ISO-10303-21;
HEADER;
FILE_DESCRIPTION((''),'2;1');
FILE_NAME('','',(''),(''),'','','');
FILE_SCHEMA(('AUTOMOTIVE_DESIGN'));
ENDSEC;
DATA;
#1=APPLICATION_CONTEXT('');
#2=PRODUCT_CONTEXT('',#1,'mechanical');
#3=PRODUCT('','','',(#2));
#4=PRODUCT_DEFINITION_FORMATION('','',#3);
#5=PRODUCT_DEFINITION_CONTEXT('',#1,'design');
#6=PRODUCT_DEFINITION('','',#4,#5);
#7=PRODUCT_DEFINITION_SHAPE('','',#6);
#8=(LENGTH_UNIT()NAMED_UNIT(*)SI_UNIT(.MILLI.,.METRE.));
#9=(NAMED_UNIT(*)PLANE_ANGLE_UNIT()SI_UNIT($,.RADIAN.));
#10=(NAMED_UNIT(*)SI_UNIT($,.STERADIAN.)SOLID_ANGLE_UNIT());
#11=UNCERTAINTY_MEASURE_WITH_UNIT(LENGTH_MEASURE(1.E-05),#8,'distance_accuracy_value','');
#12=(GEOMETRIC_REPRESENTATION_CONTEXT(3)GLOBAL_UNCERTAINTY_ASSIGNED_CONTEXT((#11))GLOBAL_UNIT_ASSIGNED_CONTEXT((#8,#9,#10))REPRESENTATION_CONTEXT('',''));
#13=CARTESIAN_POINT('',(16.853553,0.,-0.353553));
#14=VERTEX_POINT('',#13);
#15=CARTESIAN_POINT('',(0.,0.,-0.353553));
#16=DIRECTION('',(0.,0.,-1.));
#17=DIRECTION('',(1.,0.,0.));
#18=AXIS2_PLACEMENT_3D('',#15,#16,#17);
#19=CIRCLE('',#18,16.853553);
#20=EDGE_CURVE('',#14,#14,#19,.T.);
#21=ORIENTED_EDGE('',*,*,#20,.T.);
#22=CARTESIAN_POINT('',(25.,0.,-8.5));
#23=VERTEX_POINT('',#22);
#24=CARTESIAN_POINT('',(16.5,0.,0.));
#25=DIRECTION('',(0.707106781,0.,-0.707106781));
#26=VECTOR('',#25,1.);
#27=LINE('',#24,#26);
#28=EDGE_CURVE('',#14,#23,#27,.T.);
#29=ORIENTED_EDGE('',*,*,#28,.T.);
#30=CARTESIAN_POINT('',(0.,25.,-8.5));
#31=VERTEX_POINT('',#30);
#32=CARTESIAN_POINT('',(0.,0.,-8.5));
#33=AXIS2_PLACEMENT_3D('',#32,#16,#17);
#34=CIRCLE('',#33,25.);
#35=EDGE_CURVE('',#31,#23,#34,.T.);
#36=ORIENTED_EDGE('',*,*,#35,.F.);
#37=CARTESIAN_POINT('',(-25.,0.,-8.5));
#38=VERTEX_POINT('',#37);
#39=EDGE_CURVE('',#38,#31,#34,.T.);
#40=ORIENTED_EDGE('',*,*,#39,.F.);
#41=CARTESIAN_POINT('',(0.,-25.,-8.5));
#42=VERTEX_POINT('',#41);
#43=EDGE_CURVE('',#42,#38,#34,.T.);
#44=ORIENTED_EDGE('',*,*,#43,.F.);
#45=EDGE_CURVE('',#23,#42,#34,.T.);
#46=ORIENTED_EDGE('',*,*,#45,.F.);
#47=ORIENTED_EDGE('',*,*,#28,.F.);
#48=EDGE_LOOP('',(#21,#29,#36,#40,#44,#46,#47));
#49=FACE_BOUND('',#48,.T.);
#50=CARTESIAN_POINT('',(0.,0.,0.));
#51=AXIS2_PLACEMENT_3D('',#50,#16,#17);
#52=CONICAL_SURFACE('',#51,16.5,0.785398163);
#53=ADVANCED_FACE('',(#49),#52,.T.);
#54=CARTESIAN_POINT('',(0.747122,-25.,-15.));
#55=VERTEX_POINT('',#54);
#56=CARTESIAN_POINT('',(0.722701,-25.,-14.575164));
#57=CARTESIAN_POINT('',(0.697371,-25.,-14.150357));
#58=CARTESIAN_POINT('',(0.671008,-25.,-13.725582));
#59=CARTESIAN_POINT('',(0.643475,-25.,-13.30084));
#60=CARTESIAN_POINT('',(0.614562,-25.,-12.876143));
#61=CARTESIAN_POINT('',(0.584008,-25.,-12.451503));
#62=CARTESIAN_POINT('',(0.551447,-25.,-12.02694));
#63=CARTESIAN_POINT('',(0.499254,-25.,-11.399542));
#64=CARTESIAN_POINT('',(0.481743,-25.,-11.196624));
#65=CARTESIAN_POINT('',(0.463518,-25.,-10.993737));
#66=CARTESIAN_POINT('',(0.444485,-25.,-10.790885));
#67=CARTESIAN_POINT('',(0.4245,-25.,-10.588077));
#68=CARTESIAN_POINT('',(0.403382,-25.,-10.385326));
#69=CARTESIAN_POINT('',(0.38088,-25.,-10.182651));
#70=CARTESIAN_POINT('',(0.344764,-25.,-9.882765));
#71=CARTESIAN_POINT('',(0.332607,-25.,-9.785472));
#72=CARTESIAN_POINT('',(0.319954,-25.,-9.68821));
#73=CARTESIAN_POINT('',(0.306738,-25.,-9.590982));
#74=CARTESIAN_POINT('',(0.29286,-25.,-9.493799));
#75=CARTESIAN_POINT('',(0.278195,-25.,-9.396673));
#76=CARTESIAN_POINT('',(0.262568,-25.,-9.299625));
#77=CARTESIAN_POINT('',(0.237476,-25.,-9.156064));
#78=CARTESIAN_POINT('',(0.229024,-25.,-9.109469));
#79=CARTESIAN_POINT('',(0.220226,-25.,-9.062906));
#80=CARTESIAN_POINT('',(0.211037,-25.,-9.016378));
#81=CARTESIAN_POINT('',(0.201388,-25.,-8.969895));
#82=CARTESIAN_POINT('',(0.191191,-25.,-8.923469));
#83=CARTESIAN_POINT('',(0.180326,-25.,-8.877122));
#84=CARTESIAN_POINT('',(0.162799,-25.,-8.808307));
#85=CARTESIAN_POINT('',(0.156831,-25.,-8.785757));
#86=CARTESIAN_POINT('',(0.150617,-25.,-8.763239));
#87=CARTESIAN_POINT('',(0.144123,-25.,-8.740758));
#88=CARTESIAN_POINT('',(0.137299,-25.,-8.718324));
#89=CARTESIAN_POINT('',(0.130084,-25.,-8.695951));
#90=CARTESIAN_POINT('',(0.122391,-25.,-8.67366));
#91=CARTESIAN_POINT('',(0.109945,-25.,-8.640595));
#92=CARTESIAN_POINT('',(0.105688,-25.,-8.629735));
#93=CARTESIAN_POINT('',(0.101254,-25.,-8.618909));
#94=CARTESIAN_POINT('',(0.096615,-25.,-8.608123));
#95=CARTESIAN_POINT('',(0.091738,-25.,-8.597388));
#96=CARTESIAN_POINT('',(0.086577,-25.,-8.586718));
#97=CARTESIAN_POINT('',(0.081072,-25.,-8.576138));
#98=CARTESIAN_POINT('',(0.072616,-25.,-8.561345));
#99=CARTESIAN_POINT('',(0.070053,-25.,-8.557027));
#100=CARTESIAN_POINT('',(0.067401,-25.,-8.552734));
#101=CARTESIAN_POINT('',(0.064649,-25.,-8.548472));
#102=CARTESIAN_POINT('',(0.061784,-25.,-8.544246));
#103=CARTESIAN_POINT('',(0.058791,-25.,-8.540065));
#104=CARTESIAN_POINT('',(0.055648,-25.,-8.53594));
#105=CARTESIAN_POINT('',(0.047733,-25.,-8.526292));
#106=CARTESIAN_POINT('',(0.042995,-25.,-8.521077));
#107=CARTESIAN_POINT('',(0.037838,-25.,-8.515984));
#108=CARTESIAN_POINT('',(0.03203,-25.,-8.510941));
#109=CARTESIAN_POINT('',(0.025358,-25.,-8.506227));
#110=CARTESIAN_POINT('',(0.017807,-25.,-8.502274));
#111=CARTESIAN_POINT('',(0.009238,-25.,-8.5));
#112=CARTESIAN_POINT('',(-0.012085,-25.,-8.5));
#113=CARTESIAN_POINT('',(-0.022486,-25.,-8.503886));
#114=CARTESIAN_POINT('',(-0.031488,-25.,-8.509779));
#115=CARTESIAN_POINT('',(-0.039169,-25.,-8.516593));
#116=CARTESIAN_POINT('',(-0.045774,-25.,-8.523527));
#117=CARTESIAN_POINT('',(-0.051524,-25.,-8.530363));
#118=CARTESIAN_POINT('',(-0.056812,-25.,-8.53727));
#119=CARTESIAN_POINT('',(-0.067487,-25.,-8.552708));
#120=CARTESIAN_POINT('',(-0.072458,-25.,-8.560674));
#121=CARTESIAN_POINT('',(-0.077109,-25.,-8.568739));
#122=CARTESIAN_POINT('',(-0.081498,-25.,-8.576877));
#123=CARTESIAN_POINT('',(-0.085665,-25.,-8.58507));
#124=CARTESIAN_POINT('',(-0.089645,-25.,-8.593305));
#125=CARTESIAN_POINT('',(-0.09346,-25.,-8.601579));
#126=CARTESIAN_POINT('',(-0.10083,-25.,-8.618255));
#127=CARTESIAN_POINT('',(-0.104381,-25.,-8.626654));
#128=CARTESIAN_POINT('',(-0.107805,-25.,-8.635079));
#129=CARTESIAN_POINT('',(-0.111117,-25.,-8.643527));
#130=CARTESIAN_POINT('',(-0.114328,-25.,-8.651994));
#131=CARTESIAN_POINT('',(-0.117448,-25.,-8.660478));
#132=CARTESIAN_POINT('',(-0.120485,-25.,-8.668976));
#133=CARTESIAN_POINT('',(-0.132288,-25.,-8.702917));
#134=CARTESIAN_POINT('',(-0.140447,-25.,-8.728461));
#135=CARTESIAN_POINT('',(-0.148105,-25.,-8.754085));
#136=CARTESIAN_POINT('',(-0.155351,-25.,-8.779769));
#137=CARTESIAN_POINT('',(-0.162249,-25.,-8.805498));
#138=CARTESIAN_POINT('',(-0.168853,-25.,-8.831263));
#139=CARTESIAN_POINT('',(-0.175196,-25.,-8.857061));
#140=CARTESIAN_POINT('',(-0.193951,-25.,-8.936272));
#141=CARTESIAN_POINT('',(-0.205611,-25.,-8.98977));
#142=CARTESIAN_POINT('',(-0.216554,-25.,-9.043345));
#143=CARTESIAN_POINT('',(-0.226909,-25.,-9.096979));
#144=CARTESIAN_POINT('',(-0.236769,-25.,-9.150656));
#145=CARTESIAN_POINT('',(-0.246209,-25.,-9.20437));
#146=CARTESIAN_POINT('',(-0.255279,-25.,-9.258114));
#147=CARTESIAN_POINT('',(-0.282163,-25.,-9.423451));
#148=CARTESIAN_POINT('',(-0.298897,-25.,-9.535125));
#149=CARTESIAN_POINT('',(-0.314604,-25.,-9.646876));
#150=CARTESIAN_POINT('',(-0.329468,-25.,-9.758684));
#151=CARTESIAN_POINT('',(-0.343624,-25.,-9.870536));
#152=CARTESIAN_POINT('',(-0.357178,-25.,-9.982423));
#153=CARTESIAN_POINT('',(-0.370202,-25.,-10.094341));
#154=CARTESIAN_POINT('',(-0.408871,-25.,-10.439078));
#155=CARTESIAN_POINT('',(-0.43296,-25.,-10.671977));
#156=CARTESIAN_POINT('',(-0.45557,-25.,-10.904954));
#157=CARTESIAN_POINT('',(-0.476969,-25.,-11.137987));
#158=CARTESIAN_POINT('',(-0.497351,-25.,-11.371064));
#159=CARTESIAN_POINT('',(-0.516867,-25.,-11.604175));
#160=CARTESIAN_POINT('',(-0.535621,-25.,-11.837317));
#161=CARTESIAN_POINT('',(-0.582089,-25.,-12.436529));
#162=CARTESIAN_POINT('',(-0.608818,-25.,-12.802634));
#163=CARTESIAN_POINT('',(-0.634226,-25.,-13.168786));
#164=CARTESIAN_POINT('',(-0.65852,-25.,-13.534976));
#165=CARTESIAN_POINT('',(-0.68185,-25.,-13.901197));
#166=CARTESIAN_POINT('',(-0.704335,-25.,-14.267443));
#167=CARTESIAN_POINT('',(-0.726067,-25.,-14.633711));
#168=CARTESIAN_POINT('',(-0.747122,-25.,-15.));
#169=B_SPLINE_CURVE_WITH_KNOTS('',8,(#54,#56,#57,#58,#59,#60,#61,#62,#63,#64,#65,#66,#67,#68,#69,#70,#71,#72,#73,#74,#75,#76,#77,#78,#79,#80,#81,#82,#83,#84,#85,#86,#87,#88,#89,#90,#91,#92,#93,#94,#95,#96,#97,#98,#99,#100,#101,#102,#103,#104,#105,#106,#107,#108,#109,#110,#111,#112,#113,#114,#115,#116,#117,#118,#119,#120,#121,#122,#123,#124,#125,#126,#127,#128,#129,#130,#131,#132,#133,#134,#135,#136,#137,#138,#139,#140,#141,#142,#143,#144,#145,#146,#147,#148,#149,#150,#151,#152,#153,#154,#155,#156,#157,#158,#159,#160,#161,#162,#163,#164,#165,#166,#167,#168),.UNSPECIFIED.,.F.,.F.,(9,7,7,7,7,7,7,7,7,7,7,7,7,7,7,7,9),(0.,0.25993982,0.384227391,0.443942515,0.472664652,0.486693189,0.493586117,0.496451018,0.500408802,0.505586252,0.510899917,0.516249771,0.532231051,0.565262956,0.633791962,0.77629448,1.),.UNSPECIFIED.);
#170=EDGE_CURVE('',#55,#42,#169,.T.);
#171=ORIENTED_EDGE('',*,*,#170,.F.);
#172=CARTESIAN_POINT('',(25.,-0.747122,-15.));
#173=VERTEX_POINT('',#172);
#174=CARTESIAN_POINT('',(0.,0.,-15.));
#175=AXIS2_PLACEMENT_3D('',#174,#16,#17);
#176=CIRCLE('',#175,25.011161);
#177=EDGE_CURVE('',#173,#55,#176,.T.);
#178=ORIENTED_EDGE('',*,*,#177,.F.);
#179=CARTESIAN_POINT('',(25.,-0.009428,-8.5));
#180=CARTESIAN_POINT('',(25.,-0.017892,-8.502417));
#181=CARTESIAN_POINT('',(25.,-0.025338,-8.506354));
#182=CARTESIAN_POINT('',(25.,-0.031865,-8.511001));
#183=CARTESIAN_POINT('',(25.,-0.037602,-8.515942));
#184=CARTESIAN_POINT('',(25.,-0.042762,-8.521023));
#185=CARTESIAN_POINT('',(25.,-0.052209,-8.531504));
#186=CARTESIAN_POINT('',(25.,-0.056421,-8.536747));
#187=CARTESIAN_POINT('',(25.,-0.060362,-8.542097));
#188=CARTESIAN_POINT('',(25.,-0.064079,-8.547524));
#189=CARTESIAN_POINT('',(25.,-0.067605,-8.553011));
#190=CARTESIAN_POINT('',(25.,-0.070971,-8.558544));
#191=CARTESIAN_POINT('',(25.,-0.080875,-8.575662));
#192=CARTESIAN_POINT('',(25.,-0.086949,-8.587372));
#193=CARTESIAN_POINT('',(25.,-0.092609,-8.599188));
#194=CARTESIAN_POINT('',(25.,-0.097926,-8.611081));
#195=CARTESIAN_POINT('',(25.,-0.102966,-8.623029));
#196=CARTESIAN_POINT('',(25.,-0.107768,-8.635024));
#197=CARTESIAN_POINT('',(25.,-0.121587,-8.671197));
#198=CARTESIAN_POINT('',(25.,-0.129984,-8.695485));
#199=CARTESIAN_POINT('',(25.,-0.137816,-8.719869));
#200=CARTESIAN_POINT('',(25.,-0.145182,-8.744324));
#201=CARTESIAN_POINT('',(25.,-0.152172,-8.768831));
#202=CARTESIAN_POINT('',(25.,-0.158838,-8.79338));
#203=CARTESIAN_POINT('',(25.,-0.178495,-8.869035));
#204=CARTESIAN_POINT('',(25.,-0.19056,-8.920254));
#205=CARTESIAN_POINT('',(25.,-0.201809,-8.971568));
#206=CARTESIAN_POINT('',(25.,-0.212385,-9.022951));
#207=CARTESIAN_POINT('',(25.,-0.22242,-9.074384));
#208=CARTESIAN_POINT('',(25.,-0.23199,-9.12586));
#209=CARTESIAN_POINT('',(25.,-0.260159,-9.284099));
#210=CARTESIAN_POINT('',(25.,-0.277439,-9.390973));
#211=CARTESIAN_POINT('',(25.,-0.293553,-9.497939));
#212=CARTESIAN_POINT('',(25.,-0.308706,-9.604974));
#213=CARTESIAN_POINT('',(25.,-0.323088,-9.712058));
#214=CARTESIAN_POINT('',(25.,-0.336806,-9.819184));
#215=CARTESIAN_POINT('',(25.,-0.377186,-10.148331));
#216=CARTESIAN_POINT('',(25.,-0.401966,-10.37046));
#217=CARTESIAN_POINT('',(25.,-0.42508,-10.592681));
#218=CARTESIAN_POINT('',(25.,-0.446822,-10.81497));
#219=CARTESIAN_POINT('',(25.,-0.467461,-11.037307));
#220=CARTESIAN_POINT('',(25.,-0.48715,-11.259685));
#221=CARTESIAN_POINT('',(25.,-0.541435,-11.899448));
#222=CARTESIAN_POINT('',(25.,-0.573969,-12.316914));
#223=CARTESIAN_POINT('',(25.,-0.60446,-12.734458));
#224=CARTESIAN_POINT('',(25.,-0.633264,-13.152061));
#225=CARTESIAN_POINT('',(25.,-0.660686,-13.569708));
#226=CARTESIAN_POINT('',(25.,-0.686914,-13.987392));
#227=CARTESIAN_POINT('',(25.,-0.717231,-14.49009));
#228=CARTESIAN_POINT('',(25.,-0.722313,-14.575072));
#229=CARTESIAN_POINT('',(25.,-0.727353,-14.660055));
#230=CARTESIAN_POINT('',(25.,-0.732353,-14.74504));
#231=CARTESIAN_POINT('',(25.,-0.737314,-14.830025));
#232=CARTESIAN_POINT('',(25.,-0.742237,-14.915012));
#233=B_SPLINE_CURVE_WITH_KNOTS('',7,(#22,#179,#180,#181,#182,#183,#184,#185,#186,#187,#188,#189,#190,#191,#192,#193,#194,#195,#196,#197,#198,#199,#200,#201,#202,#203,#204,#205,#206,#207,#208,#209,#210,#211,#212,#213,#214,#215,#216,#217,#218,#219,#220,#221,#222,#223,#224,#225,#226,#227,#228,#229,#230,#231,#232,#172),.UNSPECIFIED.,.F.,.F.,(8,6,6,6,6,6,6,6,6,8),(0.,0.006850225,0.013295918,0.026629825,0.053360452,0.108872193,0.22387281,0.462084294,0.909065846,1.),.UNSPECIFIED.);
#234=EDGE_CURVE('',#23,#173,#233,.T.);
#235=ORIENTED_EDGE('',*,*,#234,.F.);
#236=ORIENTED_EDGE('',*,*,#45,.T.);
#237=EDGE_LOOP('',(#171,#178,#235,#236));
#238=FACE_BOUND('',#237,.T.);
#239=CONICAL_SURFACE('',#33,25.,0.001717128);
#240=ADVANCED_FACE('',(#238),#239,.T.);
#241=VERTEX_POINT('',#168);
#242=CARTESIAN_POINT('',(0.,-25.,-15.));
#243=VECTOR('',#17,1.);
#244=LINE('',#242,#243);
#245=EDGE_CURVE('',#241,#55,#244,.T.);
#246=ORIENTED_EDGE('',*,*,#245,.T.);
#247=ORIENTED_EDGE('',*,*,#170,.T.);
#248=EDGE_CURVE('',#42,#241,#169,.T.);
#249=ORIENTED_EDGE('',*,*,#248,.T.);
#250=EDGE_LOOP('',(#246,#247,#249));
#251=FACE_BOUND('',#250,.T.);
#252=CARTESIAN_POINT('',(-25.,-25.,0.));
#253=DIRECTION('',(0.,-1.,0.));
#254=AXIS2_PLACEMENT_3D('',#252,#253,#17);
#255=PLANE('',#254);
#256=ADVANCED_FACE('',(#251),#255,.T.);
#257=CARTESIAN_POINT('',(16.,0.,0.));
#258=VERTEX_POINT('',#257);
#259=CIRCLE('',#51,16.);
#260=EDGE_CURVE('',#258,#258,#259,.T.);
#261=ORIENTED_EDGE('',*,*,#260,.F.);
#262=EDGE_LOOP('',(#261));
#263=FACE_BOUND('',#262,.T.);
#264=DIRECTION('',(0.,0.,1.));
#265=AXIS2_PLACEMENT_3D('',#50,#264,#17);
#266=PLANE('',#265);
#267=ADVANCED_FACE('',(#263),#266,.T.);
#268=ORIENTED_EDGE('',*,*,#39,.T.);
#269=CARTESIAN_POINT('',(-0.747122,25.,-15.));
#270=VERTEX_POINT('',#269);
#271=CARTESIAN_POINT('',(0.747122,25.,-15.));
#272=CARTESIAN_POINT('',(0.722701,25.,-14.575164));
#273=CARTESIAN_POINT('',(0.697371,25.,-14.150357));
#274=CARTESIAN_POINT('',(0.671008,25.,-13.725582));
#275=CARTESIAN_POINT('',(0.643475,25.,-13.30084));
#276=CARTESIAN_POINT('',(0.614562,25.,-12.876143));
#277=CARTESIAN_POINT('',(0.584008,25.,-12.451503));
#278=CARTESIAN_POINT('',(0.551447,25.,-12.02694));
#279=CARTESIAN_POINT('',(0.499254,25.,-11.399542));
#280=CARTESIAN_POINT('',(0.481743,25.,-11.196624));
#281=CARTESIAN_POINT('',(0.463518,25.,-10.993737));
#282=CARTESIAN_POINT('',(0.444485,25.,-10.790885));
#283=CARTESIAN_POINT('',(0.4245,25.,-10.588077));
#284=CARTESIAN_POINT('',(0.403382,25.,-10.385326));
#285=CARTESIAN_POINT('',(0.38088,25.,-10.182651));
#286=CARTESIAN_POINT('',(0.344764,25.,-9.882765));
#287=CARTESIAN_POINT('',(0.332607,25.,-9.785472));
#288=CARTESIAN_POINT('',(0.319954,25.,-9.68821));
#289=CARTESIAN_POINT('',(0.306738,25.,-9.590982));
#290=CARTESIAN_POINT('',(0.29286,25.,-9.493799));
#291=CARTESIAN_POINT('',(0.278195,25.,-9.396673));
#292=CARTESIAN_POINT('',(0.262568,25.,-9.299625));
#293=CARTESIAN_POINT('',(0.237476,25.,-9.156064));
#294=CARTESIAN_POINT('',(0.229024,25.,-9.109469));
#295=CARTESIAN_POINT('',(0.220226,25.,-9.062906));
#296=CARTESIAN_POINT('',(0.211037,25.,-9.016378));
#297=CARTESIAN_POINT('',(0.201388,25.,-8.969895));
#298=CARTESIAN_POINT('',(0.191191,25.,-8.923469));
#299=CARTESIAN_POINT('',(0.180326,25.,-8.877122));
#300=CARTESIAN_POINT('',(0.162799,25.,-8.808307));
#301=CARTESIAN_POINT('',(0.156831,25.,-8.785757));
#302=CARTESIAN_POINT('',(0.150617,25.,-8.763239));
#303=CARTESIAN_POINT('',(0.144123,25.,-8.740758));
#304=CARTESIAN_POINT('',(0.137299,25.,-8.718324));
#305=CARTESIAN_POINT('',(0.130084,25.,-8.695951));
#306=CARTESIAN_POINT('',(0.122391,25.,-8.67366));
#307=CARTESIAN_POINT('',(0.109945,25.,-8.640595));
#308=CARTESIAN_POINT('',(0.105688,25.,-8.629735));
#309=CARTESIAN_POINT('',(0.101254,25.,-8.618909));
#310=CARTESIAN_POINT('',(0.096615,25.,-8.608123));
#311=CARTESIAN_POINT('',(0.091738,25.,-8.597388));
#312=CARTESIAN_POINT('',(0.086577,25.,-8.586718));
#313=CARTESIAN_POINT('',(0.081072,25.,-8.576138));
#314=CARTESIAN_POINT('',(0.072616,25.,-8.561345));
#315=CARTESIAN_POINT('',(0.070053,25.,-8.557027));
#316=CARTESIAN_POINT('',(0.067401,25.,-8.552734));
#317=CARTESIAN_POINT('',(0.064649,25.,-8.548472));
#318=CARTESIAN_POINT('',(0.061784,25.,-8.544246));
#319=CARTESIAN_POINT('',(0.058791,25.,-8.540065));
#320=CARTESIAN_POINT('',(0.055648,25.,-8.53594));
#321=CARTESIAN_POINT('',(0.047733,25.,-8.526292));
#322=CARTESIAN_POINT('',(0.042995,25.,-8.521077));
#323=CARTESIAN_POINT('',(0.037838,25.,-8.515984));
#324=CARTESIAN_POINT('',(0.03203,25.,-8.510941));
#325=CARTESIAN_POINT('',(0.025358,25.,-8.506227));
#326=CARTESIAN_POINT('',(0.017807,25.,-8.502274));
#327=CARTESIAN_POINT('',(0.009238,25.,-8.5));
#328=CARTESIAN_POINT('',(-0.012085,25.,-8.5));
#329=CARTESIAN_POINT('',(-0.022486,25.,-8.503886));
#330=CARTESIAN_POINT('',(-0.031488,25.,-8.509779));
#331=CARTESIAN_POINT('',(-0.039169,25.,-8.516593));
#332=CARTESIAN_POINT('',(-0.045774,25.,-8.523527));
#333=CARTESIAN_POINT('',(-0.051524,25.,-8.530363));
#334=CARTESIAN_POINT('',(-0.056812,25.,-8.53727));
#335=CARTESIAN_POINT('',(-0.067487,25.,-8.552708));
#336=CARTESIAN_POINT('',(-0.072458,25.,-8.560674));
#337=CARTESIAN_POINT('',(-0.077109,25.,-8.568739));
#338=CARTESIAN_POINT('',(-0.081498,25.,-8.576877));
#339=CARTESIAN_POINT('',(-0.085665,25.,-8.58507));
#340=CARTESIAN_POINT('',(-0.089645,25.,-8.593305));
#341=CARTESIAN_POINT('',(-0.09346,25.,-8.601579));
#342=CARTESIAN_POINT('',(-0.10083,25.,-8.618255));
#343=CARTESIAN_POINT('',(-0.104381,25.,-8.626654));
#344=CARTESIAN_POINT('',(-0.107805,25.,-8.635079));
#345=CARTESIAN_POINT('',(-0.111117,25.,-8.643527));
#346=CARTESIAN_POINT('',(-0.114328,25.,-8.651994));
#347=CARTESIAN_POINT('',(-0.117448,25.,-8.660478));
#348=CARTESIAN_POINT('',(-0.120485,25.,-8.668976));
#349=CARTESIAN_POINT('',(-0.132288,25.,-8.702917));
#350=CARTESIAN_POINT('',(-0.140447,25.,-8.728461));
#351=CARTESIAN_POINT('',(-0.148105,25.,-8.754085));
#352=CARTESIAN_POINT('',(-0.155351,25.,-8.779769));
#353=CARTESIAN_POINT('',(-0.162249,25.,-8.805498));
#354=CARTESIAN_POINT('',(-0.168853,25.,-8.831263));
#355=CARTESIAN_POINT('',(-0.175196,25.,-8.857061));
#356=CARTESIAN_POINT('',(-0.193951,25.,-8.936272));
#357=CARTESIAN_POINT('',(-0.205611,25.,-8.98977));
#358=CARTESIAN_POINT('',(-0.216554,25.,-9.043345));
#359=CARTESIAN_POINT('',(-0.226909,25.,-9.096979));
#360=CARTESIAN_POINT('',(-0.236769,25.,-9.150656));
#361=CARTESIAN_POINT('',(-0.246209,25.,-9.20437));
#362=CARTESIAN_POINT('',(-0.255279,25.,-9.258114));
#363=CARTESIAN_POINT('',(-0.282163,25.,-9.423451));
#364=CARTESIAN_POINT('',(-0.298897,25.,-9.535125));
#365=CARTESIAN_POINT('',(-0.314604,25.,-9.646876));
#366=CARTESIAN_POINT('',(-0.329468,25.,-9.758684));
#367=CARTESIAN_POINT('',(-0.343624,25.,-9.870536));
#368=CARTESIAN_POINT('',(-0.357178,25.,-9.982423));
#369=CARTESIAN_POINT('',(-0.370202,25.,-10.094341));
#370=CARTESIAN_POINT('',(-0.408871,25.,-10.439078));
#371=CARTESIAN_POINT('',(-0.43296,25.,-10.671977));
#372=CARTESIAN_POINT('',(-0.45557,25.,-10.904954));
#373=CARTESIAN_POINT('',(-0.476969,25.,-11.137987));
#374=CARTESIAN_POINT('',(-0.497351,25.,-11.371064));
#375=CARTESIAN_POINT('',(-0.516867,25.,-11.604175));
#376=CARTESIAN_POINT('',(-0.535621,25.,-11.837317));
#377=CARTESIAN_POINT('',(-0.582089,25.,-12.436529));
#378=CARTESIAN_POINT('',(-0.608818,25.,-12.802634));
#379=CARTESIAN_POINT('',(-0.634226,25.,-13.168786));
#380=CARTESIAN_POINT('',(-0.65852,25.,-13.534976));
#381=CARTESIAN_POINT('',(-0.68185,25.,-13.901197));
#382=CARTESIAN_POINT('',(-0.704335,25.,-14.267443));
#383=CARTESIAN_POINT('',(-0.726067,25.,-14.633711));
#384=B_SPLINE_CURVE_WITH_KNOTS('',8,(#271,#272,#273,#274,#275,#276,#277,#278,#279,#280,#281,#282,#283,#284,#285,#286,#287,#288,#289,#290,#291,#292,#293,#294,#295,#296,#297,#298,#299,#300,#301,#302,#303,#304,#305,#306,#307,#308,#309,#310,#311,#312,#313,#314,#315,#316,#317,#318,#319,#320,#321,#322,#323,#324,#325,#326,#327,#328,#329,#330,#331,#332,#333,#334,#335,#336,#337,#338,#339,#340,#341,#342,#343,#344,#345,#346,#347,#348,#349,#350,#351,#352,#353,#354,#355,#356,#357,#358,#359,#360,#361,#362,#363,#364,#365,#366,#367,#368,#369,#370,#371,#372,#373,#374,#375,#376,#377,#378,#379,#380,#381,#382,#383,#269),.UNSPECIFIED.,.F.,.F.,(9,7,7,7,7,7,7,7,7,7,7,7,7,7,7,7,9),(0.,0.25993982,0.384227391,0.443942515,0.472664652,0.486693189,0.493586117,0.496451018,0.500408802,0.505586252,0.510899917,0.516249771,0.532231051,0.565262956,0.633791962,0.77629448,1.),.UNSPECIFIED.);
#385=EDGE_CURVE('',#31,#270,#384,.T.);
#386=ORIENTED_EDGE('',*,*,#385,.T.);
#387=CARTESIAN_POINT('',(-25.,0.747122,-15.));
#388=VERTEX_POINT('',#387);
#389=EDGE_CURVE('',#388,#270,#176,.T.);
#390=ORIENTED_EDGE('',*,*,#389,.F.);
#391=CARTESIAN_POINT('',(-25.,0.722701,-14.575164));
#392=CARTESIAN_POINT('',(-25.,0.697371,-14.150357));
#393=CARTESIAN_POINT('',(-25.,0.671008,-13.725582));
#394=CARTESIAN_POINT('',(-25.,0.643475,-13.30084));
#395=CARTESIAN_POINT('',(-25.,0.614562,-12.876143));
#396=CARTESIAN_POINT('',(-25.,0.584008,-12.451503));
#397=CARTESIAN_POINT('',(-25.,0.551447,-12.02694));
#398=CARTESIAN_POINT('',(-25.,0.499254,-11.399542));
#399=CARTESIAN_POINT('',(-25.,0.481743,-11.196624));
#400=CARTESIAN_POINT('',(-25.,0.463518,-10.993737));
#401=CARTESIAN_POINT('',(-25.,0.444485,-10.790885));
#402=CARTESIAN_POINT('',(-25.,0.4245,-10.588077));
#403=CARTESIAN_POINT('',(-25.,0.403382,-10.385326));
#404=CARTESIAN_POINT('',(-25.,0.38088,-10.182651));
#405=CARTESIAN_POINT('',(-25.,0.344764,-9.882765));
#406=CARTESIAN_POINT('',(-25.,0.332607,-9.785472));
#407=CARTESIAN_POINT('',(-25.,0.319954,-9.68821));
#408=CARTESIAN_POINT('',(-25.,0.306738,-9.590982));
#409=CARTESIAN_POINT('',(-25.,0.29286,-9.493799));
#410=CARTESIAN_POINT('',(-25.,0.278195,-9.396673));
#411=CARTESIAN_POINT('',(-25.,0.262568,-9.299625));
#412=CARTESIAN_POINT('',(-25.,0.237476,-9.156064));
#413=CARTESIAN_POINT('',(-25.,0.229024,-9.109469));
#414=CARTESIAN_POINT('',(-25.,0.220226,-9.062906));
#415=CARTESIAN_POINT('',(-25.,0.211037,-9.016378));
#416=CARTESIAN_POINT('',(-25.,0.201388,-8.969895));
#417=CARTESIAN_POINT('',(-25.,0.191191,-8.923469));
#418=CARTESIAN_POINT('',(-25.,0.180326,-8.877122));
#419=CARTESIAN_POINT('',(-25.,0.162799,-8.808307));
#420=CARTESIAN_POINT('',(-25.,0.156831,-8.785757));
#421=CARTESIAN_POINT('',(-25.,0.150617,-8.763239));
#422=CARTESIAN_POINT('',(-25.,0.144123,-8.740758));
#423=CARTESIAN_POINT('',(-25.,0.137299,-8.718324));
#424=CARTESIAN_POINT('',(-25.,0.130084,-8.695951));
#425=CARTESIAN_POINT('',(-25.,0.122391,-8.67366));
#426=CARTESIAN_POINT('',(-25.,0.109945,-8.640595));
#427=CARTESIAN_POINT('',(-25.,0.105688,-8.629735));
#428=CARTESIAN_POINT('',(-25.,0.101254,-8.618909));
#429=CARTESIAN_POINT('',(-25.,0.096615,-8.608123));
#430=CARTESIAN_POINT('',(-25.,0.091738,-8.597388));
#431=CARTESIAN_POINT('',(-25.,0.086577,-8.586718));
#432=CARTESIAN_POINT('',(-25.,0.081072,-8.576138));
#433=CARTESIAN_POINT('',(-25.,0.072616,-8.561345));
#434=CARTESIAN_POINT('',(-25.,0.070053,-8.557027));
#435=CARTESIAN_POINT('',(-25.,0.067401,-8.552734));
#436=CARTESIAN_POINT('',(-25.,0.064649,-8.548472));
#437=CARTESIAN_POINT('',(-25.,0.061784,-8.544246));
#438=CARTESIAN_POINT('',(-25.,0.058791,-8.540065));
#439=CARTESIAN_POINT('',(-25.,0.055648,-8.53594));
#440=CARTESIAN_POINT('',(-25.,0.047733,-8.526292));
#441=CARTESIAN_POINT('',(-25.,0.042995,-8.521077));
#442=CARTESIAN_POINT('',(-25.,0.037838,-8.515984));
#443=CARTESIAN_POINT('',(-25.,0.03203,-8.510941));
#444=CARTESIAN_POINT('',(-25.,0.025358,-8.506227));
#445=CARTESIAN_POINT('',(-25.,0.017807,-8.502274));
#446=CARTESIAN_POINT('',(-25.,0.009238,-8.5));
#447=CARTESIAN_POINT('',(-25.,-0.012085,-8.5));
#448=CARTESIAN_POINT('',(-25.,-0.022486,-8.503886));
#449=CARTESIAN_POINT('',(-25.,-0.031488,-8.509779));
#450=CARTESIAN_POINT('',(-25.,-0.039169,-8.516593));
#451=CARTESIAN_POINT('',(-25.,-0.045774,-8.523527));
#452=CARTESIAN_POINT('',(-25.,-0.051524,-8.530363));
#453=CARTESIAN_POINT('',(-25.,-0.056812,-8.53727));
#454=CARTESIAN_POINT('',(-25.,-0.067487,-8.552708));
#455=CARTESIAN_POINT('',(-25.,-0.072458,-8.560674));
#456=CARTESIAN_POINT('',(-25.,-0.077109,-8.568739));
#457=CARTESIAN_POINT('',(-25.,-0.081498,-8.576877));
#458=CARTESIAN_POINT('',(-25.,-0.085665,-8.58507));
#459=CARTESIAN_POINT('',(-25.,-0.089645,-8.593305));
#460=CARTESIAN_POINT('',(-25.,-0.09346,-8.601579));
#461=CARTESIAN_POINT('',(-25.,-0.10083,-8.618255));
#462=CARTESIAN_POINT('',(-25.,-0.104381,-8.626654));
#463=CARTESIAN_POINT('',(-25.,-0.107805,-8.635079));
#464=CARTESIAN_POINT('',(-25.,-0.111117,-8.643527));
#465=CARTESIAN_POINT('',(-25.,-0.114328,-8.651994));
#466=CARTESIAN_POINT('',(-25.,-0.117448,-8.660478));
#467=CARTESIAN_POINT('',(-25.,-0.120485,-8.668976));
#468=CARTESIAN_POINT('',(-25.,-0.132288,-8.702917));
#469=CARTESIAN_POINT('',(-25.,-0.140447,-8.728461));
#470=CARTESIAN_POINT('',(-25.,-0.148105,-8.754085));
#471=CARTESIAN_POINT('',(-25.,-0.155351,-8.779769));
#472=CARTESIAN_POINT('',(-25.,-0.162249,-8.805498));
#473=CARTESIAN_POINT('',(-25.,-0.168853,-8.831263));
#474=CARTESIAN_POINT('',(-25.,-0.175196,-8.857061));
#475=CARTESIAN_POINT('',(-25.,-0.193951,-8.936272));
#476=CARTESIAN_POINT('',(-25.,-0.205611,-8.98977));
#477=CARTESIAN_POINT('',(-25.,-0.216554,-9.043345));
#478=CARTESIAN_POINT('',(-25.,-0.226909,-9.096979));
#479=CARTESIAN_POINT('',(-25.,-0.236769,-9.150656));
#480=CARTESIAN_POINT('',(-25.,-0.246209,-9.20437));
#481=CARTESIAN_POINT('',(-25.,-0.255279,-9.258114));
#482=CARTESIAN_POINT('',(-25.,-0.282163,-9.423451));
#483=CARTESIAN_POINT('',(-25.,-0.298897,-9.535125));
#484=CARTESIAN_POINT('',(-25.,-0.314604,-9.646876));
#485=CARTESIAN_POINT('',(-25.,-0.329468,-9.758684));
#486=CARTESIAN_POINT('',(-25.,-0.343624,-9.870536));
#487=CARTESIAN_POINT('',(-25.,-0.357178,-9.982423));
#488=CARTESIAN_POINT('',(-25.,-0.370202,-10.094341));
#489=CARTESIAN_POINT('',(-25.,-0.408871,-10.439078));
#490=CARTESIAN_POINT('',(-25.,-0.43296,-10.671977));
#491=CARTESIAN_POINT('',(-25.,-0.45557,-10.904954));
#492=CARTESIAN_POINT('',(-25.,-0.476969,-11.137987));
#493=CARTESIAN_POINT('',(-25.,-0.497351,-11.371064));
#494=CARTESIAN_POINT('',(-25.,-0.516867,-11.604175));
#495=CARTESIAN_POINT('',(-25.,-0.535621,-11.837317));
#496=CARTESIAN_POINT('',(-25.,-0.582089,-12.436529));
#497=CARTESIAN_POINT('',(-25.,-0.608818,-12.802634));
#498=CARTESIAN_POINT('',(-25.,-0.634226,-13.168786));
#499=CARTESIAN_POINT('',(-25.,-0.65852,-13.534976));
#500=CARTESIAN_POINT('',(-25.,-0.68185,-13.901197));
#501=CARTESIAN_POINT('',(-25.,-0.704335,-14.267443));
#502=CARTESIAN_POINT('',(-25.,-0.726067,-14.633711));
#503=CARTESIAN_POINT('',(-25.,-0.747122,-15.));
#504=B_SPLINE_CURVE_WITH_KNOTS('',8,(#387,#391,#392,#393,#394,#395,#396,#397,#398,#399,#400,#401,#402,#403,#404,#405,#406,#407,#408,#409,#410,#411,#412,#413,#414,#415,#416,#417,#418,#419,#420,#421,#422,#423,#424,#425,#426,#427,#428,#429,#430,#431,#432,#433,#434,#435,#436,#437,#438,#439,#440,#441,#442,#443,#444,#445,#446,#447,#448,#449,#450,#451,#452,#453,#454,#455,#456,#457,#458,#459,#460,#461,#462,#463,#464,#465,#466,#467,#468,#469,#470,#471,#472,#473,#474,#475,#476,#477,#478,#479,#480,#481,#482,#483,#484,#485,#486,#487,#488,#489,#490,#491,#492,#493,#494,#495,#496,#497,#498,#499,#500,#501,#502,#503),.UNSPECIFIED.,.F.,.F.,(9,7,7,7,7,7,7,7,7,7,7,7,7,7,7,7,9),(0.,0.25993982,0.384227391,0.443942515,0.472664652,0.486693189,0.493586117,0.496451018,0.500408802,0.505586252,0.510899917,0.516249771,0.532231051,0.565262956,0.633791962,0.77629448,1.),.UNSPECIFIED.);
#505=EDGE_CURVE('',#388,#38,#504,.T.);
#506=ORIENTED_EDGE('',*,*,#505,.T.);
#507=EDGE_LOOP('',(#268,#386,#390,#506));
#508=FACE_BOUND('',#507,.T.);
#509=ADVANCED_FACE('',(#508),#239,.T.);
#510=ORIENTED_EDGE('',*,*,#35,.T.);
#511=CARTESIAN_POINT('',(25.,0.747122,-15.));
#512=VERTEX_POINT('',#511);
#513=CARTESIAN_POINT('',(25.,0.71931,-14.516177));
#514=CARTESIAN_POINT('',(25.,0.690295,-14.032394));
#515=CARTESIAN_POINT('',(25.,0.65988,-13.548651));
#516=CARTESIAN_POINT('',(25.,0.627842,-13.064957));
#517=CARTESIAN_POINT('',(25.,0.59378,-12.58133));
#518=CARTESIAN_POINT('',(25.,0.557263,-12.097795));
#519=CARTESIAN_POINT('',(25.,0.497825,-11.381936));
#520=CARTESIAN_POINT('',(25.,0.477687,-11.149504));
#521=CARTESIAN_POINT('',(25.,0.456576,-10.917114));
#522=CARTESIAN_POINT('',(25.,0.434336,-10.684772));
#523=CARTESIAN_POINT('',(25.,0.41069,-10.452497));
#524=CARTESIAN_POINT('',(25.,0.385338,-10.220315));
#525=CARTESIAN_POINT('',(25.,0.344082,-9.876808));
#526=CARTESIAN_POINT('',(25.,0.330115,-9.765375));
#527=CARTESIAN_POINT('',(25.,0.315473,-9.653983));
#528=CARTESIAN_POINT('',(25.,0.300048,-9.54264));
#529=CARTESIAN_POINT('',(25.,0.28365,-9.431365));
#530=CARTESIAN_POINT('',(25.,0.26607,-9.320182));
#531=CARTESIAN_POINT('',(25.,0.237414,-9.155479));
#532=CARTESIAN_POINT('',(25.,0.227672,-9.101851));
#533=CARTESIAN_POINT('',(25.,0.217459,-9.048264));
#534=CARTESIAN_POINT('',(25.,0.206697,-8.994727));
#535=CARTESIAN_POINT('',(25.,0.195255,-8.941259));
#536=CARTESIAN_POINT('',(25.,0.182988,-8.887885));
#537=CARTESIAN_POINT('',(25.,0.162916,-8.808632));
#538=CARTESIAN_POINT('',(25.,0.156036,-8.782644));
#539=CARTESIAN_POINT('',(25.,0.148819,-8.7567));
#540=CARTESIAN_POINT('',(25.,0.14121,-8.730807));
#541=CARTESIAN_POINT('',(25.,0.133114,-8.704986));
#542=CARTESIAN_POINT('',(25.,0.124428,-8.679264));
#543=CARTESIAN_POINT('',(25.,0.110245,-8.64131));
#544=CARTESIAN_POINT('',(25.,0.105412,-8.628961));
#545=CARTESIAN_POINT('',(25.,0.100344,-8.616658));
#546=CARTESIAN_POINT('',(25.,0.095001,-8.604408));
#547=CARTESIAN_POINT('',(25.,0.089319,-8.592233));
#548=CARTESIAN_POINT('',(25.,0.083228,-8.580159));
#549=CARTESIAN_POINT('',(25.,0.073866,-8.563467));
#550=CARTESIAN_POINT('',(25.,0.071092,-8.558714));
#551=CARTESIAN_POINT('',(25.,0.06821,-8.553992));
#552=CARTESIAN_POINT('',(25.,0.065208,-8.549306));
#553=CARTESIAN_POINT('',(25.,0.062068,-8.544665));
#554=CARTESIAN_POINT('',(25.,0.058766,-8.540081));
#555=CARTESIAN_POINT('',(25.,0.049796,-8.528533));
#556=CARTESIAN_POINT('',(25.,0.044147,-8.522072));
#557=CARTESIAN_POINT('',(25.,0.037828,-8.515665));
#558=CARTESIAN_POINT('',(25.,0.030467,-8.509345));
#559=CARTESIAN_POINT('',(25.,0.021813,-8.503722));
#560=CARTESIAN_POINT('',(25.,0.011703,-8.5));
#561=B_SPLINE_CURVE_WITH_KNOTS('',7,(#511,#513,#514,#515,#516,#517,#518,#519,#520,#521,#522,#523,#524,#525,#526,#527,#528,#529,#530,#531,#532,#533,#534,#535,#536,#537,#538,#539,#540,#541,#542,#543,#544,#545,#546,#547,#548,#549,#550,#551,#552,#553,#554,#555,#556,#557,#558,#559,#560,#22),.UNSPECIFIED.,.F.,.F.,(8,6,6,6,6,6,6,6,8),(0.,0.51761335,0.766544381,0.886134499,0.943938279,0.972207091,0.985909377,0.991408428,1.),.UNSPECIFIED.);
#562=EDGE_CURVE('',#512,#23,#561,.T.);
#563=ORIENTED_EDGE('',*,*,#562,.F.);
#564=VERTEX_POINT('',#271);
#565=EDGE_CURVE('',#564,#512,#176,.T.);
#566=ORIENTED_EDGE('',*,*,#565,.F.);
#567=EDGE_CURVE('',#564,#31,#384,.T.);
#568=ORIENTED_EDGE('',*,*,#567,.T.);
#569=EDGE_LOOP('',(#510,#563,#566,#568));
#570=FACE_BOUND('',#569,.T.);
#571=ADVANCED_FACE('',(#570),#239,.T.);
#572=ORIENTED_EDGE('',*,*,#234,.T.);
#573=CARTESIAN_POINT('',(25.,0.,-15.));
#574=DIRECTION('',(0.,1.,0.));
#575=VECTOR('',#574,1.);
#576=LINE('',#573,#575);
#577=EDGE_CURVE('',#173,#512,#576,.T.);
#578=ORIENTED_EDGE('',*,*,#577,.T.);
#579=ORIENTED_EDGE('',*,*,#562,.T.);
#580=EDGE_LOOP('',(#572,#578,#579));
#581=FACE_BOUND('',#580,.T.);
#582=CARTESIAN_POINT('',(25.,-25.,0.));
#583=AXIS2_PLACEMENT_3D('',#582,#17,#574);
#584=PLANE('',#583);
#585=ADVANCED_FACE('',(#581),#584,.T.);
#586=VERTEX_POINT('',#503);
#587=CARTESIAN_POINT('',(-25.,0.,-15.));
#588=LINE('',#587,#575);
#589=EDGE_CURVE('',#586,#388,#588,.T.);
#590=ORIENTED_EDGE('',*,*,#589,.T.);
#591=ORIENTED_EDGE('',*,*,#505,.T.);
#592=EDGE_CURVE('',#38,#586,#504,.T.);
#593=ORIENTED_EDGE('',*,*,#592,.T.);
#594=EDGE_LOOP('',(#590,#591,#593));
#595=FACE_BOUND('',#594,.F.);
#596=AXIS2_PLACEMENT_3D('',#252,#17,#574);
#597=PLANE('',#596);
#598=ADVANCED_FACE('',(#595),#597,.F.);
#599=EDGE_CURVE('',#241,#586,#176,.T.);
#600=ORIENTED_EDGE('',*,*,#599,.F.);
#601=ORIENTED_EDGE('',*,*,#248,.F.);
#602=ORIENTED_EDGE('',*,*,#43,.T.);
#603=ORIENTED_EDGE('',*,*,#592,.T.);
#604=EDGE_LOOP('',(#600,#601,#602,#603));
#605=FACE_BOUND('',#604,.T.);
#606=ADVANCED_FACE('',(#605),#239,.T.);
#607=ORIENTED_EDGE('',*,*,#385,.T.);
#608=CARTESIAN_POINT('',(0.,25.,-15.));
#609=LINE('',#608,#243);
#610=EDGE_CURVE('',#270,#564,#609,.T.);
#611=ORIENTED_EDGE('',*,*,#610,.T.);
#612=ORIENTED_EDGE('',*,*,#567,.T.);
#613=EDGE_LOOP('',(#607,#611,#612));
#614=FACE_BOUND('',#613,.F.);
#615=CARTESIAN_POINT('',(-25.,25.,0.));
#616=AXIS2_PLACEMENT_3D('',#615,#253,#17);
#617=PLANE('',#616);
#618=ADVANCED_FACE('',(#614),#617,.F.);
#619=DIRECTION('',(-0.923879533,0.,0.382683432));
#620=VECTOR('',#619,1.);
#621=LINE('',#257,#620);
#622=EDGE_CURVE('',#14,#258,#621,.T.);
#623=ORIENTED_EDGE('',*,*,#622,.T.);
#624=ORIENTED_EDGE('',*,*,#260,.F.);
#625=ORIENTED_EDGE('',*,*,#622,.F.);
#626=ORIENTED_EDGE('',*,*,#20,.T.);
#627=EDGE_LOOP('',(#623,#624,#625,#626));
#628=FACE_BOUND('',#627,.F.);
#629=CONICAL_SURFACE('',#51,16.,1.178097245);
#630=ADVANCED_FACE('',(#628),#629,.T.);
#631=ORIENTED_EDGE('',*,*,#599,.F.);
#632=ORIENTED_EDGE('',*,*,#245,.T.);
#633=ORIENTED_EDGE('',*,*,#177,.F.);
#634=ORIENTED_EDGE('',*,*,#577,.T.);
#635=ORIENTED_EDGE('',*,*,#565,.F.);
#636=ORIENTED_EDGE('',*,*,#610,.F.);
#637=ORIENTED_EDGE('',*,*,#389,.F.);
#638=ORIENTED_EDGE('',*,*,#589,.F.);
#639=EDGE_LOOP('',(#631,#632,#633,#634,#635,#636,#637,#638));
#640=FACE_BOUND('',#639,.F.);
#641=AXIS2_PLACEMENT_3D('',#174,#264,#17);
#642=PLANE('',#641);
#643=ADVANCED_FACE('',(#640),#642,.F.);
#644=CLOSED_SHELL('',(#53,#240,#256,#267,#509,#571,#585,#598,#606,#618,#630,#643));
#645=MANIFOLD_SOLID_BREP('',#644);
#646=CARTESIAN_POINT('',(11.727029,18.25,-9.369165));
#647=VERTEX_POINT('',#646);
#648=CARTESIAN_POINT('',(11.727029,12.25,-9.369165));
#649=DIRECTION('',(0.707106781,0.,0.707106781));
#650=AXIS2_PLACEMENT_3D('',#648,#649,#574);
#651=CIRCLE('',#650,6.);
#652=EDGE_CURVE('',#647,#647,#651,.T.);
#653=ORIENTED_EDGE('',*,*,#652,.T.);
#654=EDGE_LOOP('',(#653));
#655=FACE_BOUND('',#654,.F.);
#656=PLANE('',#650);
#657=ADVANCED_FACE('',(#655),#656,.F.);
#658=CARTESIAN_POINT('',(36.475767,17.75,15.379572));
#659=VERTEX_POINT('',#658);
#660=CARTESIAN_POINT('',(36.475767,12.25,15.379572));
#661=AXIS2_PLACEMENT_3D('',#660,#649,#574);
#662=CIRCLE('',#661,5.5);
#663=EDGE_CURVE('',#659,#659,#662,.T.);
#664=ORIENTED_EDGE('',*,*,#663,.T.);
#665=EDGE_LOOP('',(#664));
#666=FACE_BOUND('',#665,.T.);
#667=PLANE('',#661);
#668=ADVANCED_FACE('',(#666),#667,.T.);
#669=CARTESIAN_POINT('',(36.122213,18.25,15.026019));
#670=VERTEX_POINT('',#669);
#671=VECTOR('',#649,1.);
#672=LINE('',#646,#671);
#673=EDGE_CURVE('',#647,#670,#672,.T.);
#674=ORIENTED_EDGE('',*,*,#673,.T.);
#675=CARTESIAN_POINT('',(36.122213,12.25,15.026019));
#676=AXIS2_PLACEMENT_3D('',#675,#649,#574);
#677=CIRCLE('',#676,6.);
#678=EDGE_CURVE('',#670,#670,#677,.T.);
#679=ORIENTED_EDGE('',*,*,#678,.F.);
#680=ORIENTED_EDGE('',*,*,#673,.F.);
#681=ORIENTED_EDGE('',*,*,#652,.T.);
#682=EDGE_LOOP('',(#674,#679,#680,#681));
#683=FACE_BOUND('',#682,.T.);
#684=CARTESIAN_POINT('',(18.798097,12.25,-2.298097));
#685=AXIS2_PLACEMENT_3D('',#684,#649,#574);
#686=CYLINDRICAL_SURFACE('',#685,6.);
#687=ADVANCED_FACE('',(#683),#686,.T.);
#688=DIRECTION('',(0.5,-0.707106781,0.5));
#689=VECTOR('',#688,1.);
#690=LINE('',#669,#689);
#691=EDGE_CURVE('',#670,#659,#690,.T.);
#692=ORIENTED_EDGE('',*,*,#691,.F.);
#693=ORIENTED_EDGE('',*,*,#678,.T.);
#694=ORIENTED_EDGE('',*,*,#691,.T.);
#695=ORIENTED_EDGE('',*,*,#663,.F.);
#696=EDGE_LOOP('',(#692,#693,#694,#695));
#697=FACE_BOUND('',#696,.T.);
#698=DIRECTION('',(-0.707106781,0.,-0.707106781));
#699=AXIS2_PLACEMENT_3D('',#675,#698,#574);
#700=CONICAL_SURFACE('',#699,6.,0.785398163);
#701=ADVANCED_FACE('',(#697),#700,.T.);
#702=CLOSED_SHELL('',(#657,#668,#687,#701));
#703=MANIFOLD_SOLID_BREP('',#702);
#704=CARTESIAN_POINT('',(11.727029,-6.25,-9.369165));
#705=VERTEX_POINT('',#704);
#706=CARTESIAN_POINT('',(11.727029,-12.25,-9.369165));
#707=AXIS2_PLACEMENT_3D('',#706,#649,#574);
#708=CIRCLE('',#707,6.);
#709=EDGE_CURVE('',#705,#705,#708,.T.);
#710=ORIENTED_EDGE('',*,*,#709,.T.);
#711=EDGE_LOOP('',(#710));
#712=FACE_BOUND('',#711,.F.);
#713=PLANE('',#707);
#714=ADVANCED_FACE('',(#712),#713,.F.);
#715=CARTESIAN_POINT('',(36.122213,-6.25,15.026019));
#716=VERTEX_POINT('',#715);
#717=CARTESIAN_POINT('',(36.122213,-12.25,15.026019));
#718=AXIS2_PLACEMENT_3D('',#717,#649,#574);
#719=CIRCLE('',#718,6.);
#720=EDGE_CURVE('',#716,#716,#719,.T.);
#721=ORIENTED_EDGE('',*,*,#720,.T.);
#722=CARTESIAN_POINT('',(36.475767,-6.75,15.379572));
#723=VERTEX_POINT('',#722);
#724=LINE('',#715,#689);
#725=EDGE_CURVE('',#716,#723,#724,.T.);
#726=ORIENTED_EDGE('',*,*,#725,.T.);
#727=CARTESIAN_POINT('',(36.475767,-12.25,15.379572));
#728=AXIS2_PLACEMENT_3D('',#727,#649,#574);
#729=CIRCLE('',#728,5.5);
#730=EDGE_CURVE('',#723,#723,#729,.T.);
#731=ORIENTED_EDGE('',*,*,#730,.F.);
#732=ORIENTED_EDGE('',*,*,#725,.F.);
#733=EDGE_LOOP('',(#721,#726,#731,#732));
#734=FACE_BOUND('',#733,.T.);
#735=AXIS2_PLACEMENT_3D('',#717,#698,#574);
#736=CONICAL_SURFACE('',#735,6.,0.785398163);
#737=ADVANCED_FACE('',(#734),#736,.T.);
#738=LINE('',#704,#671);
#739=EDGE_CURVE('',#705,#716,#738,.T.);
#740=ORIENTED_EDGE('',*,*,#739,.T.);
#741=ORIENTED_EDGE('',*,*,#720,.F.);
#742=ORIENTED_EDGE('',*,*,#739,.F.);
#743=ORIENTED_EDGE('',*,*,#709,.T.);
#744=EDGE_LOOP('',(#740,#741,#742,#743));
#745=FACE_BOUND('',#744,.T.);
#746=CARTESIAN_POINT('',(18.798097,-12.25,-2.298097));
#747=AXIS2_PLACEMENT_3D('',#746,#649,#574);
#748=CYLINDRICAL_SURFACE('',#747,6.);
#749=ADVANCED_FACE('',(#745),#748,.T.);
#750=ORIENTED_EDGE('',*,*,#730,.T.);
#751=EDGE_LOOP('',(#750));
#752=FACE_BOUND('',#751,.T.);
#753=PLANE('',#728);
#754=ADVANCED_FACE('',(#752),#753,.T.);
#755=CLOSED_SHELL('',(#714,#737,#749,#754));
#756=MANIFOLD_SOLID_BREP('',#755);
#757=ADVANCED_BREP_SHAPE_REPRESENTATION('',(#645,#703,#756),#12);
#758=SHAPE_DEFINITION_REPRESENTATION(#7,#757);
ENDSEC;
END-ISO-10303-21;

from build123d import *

# Parameters (mm, degrees)
F0_W          = 50
F0_H          = 50
F1_DEPTH      = 15
F2_SIZE       = 8.5
F3_R          = 6
F6_DEPTH      = 25
F6_DEPTH_BACK = 10
F7_SIZE       = 0.5
F7_2_SIZE     = 0.5
F7_3_SIZE     = 0.5


# Not quite as in the source:
# - a feature names something its author has since deleted; it is built from what else it names


with BuildPart() as f1:
    # F0 (on Top) → F1 (new body)
    with BuildSketch(Plane.XY):
        Rectangle(F0_W, F0_H)
    extrude(amount=-F1_DEPTH)

    # F2
    f2_edges = [f1.edges().sort_by_distance(p)[0] for p in [
        (25, 0, 0),
    ]]
    chamfer(f2_edges, length=F2_SIZE)

    # F4 (on Front) → F5 (revolve, cut)
    with BuildSketch(Plane.XZ):
        Polygon((16.5, 0), (25, -8.5), (25.0111613423, -15), (57.6415769756, -15), (57.6415769756, 0), align=None)
    revolve(axis=Axis((0, 0, -4.25), (0, 0, -1)), mode=Mode.SUBTRACT)

    # F7#3
    f7_3_edges = [f1.edges().sort_by_distance(p)[0] for p in [
        (-16.5, 0, 0),
    ]]
    chamfer(f7_3_edges, length=F7_3_SIZE)


with BuildPart() as f6:
    # F3 (on face) → F6 (new body, two sides)
    with BuildSketch(Plane(origin=(8.25, 0, 8.25), x_dir=(0, 1, 0), z_dir=(0.7071067812, 0, 0.7071067812))) as f6_sk:
        with Locations((-12.25, -14.9172618896)):
            Circle(F3_R)
    extrude(amount=F6_DEPTH)
    extrude(f6_sk.sketch, amount=-F6_DEPTH_BACK)

    # F7
    f7_edges = [f6.edges().sort_by_distance(p)[0] for p in [
        (36.475767, -18.25, 15.379572),
    ]]
    chamfer(f7_edges, length=F7_SIZE)


with BuildPart() as f6b:
    # F3 (on face) → F6, piece 2 (new body, two sides)
    with BuildSketch(Plane(origin=(8.25, 0, 8.25), x_dir=(0, 1, 0), z_dir=(0.7071067812, 0, 0.7071067812))) as f6_2_sk:
        with Locations((12.25, -14.9172618896)):
            Circle(F3_R)
    extrude(amount=F6_DEPTH)
    extrude(f6_2_sk.sketch, amount=-F6_DEPTH_BACK)

    # F7#2
    f7_2_edges = [f6b.edges().sort_by_distance(p)[0] for p in [
        (36.475767, 6.25, 15.379572),
    ]]
    chamfer(f7_2_edges, length=F7_2_SIZE)


solid = Compound([f1.part, f6.part, f6b.part])
